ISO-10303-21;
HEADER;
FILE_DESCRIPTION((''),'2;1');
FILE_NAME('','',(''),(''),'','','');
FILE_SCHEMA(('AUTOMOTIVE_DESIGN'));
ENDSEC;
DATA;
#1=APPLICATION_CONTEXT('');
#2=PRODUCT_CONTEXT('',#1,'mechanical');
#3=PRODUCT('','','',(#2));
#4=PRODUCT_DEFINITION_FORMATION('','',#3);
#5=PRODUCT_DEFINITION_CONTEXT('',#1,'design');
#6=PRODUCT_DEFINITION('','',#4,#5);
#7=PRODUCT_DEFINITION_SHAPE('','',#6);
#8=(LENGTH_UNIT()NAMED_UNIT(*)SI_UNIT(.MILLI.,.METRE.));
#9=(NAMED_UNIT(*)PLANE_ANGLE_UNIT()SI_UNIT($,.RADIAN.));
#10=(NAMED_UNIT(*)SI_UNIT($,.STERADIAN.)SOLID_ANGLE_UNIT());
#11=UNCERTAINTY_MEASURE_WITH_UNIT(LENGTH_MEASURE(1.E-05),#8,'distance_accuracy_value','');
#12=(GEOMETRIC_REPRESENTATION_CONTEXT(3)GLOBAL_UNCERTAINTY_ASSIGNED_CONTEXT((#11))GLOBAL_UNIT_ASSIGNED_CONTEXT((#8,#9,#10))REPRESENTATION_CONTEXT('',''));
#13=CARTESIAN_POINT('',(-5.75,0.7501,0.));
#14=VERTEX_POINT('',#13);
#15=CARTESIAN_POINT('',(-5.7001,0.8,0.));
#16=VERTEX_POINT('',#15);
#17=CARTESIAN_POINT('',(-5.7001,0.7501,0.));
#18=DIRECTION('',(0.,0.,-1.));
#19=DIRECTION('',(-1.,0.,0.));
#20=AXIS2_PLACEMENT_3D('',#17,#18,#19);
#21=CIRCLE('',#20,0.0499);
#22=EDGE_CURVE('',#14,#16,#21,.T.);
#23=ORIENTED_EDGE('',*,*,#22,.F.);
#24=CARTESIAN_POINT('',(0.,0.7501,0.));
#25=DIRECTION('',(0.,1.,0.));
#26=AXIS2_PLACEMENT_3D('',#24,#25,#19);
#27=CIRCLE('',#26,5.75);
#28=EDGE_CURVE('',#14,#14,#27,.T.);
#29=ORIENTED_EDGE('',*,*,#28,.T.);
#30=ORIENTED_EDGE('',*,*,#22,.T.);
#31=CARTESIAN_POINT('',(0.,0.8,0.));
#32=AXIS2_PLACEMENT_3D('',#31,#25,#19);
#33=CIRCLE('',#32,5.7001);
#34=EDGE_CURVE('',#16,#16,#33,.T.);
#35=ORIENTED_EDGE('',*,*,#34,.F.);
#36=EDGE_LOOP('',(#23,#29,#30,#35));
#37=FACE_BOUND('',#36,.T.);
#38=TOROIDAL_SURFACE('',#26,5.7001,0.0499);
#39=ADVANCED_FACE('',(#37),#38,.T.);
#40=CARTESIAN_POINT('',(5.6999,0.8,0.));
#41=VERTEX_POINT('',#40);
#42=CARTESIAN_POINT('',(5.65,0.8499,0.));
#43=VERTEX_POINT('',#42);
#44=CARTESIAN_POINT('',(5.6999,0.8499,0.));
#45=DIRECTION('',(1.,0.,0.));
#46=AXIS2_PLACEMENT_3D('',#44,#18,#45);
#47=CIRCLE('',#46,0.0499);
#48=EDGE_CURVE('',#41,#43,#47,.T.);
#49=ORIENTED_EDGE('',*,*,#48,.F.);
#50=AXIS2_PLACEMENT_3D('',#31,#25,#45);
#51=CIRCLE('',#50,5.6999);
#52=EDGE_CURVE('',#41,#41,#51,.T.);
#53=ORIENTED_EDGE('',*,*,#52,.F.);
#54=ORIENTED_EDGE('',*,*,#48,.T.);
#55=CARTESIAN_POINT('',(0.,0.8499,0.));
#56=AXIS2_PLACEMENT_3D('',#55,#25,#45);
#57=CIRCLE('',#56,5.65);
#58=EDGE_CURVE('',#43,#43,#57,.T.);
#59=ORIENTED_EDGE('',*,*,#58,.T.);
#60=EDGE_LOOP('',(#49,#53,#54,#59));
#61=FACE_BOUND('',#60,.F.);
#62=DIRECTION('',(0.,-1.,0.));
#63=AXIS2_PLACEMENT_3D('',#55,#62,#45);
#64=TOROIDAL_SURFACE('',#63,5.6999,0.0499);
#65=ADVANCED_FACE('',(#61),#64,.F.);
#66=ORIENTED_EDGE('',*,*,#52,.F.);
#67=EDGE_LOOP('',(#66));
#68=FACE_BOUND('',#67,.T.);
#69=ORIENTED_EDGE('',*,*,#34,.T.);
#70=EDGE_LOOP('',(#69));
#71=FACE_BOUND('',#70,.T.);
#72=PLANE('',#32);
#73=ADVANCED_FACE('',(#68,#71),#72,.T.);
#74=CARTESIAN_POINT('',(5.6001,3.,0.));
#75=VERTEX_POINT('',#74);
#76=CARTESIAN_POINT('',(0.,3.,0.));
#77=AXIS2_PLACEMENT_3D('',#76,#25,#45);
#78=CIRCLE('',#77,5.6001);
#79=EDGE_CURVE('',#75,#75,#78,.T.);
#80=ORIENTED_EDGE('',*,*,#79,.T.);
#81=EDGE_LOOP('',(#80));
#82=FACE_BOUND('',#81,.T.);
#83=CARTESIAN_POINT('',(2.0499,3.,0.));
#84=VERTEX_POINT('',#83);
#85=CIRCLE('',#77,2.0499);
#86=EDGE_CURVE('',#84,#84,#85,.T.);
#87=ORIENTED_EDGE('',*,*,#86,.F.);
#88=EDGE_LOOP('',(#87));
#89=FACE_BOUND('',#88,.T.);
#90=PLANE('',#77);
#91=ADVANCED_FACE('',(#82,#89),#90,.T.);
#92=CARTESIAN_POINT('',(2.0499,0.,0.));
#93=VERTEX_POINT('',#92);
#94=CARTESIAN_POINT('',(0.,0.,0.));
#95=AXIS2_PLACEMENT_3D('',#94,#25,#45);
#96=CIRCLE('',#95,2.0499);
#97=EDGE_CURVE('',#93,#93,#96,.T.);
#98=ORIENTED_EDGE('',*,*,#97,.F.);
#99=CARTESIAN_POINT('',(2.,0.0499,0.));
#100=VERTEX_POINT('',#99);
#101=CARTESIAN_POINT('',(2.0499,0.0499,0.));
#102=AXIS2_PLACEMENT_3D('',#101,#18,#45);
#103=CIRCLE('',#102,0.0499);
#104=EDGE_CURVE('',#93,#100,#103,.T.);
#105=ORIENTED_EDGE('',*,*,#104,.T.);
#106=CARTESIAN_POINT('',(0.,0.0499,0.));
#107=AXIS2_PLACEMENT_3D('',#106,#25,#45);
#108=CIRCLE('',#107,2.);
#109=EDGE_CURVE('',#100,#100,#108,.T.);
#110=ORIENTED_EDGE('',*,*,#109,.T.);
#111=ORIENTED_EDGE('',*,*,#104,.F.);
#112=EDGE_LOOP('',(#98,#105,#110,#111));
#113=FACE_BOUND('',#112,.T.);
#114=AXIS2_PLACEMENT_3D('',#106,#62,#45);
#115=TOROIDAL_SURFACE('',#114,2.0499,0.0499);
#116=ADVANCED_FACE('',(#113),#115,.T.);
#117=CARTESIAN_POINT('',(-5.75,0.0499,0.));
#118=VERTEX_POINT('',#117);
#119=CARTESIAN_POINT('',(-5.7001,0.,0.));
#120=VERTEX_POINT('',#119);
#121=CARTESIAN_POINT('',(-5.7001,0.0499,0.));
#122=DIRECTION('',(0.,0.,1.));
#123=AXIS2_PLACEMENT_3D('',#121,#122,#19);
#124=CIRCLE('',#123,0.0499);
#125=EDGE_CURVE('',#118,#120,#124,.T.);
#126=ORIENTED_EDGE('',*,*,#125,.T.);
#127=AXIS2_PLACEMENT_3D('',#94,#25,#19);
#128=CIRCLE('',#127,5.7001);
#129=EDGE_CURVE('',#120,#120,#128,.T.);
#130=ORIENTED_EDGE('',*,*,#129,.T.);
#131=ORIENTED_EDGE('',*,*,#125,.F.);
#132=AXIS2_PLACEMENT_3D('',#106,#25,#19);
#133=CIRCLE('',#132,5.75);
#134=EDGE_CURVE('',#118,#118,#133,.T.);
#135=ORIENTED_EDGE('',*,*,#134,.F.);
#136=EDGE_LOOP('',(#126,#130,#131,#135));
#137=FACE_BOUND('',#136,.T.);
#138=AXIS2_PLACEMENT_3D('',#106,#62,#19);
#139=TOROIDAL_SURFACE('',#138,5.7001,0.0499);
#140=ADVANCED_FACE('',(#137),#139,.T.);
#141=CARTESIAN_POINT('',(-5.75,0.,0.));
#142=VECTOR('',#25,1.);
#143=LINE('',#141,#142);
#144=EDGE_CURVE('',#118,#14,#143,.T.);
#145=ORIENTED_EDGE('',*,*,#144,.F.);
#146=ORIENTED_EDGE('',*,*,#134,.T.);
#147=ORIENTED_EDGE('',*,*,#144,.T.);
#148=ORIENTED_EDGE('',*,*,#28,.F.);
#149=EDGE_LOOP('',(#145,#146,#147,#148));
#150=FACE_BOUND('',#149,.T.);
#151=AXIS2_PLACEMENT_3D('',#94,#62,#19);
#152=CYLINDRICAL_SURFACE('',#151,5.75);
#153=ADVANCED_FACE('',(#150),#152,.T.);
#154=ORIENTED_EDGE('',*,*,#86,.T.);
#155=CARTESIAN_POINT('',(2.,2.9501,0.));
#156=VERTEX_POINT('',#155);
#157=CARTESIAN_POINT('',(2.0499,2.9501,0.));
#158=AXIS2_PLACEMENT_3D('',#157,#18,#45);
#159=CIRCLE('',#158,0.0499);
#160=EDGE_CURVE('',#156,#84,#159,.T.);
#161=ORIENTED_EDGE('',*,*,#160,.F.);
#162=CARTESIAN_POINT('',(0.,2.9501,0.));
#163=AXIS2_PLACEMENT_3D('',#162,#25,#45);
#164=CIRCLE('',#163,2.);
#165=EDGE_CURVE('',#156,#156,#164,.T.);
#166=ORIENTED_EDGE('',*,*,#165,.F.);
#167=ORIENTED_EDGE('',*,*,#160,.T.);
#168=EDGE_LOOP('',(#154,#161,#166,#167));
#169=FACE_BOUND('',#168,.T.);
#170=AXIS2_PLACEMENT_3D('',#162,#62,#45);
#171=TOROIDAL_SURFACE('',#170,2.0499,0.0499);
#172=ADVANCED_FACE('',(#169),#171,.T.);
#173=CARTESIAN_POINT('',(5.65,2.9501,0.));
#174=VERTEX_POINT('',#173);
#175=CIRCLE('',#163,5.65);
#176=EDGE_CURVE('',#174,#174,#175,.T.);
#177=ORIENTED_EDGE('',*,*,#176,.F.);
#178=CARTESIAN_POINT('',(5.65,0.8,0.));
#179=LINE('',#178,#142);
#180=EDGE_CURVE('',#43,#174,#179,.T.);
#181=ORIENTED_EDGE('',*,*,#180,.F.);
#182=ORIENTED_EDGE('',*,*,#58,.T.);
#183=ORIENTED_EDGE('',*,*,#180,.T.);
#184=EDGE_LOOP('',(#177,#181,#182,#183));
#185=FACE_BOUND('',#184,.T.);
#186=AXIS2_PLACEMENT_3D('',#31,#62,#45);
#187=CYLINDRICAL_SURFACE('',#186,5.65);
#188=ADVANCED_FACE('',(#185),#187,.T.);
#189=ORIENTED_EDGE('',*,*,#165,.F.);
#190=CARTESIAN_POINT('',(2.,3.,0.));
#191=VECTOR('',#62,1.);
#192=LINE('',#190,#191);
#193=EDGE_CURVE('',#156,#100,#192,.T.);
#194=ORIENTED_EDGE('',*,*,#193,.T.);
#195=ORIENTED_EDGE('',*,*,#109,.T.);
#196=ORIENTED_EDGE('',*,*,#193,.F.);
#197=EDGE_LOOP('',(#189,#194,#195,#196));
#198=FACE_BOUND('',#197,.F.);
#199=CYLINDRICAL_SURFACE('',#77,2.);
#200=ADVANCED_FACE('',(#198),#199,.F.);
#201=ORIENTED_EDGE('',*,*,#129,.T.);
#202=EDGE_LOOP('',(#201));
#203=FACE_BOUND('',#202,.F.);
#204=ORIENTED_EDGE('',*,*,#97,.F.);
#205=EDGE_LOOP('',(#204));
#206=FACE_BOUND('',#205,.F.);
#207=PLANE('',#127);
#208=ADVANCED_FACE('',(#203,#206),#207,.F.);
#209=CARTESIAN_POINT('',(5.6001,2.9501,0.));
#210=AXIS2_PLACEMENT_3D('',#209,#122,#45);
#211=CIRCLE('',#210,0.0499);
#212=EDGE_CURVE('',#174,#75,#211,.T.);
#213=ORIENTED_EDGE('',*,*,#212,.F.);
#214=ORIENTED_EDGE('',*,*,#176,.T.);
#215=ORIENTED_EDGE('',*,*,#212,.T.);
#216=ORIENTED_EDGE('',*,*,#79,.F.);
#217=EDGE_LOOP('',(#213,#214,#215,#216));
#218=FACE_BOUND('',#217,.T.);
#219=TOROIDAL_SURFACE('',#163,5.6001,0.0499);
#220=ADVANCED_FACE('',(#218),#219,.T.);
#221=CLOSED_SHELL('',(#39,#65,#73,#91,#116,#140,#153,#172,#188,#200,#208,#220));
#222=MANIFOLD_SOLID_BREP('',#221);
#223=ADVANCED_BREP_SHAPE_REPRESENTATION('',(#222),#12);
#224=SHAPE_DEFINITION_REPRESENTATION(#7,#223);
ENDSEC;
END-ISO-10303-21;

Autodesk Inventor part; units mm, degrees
ref_plane "YZ Plane" through (0, 0, 0) normal (1, 0, 0) x (0, 1, 0)
ref_plane "XZ Plane" through (0, 0, 0) normal (0, 1, 0) x (-1, 0, 0)
ref_plane "XY Plane" through (0, 0, 0) normal (0, 0, 1) x (1, 0, 0)
sketch "Sketch1" plane through (0, 0, 0) normal (0, 1, 0) x (-1, 0, 0)
  circle A0 centre (0, 0) radius 5.75
  dimension "d0" = 11.5
extrude "Extrusion1" add sketch "Sketch1" along normal blind 0.8
sketch "Sketch2" plane through (0, 0.8, 0) normal (0, 1, 0) x (1, 0, 0)
  circle A0 centre (0, 0) radius 5.65
  dimension "d3" = 11.3
extrude "Extrusion2" add sketch "Sketch2" along normal blind 2.2
sketch "Sketch3" plane through (0, 3, 0) normal (0, 1, 0) x (1, 0, 0)
  circle A0 centre (0, 0) radius 2
  dimension "d6" = 4
extrude "Extrusion3" cut sketch "Sketch3" against normal blind 3.2
fillet "Fillet1" radius 0.05 6 edges at (-5.65, 3, 0) (-5.65, 0.8, 0) (5.75, 0.8, 0) (5.75, 0, 0) (-2, 3, 0) (-2, 0, 0)
properties part number "flangedBearing_2x10x4"
